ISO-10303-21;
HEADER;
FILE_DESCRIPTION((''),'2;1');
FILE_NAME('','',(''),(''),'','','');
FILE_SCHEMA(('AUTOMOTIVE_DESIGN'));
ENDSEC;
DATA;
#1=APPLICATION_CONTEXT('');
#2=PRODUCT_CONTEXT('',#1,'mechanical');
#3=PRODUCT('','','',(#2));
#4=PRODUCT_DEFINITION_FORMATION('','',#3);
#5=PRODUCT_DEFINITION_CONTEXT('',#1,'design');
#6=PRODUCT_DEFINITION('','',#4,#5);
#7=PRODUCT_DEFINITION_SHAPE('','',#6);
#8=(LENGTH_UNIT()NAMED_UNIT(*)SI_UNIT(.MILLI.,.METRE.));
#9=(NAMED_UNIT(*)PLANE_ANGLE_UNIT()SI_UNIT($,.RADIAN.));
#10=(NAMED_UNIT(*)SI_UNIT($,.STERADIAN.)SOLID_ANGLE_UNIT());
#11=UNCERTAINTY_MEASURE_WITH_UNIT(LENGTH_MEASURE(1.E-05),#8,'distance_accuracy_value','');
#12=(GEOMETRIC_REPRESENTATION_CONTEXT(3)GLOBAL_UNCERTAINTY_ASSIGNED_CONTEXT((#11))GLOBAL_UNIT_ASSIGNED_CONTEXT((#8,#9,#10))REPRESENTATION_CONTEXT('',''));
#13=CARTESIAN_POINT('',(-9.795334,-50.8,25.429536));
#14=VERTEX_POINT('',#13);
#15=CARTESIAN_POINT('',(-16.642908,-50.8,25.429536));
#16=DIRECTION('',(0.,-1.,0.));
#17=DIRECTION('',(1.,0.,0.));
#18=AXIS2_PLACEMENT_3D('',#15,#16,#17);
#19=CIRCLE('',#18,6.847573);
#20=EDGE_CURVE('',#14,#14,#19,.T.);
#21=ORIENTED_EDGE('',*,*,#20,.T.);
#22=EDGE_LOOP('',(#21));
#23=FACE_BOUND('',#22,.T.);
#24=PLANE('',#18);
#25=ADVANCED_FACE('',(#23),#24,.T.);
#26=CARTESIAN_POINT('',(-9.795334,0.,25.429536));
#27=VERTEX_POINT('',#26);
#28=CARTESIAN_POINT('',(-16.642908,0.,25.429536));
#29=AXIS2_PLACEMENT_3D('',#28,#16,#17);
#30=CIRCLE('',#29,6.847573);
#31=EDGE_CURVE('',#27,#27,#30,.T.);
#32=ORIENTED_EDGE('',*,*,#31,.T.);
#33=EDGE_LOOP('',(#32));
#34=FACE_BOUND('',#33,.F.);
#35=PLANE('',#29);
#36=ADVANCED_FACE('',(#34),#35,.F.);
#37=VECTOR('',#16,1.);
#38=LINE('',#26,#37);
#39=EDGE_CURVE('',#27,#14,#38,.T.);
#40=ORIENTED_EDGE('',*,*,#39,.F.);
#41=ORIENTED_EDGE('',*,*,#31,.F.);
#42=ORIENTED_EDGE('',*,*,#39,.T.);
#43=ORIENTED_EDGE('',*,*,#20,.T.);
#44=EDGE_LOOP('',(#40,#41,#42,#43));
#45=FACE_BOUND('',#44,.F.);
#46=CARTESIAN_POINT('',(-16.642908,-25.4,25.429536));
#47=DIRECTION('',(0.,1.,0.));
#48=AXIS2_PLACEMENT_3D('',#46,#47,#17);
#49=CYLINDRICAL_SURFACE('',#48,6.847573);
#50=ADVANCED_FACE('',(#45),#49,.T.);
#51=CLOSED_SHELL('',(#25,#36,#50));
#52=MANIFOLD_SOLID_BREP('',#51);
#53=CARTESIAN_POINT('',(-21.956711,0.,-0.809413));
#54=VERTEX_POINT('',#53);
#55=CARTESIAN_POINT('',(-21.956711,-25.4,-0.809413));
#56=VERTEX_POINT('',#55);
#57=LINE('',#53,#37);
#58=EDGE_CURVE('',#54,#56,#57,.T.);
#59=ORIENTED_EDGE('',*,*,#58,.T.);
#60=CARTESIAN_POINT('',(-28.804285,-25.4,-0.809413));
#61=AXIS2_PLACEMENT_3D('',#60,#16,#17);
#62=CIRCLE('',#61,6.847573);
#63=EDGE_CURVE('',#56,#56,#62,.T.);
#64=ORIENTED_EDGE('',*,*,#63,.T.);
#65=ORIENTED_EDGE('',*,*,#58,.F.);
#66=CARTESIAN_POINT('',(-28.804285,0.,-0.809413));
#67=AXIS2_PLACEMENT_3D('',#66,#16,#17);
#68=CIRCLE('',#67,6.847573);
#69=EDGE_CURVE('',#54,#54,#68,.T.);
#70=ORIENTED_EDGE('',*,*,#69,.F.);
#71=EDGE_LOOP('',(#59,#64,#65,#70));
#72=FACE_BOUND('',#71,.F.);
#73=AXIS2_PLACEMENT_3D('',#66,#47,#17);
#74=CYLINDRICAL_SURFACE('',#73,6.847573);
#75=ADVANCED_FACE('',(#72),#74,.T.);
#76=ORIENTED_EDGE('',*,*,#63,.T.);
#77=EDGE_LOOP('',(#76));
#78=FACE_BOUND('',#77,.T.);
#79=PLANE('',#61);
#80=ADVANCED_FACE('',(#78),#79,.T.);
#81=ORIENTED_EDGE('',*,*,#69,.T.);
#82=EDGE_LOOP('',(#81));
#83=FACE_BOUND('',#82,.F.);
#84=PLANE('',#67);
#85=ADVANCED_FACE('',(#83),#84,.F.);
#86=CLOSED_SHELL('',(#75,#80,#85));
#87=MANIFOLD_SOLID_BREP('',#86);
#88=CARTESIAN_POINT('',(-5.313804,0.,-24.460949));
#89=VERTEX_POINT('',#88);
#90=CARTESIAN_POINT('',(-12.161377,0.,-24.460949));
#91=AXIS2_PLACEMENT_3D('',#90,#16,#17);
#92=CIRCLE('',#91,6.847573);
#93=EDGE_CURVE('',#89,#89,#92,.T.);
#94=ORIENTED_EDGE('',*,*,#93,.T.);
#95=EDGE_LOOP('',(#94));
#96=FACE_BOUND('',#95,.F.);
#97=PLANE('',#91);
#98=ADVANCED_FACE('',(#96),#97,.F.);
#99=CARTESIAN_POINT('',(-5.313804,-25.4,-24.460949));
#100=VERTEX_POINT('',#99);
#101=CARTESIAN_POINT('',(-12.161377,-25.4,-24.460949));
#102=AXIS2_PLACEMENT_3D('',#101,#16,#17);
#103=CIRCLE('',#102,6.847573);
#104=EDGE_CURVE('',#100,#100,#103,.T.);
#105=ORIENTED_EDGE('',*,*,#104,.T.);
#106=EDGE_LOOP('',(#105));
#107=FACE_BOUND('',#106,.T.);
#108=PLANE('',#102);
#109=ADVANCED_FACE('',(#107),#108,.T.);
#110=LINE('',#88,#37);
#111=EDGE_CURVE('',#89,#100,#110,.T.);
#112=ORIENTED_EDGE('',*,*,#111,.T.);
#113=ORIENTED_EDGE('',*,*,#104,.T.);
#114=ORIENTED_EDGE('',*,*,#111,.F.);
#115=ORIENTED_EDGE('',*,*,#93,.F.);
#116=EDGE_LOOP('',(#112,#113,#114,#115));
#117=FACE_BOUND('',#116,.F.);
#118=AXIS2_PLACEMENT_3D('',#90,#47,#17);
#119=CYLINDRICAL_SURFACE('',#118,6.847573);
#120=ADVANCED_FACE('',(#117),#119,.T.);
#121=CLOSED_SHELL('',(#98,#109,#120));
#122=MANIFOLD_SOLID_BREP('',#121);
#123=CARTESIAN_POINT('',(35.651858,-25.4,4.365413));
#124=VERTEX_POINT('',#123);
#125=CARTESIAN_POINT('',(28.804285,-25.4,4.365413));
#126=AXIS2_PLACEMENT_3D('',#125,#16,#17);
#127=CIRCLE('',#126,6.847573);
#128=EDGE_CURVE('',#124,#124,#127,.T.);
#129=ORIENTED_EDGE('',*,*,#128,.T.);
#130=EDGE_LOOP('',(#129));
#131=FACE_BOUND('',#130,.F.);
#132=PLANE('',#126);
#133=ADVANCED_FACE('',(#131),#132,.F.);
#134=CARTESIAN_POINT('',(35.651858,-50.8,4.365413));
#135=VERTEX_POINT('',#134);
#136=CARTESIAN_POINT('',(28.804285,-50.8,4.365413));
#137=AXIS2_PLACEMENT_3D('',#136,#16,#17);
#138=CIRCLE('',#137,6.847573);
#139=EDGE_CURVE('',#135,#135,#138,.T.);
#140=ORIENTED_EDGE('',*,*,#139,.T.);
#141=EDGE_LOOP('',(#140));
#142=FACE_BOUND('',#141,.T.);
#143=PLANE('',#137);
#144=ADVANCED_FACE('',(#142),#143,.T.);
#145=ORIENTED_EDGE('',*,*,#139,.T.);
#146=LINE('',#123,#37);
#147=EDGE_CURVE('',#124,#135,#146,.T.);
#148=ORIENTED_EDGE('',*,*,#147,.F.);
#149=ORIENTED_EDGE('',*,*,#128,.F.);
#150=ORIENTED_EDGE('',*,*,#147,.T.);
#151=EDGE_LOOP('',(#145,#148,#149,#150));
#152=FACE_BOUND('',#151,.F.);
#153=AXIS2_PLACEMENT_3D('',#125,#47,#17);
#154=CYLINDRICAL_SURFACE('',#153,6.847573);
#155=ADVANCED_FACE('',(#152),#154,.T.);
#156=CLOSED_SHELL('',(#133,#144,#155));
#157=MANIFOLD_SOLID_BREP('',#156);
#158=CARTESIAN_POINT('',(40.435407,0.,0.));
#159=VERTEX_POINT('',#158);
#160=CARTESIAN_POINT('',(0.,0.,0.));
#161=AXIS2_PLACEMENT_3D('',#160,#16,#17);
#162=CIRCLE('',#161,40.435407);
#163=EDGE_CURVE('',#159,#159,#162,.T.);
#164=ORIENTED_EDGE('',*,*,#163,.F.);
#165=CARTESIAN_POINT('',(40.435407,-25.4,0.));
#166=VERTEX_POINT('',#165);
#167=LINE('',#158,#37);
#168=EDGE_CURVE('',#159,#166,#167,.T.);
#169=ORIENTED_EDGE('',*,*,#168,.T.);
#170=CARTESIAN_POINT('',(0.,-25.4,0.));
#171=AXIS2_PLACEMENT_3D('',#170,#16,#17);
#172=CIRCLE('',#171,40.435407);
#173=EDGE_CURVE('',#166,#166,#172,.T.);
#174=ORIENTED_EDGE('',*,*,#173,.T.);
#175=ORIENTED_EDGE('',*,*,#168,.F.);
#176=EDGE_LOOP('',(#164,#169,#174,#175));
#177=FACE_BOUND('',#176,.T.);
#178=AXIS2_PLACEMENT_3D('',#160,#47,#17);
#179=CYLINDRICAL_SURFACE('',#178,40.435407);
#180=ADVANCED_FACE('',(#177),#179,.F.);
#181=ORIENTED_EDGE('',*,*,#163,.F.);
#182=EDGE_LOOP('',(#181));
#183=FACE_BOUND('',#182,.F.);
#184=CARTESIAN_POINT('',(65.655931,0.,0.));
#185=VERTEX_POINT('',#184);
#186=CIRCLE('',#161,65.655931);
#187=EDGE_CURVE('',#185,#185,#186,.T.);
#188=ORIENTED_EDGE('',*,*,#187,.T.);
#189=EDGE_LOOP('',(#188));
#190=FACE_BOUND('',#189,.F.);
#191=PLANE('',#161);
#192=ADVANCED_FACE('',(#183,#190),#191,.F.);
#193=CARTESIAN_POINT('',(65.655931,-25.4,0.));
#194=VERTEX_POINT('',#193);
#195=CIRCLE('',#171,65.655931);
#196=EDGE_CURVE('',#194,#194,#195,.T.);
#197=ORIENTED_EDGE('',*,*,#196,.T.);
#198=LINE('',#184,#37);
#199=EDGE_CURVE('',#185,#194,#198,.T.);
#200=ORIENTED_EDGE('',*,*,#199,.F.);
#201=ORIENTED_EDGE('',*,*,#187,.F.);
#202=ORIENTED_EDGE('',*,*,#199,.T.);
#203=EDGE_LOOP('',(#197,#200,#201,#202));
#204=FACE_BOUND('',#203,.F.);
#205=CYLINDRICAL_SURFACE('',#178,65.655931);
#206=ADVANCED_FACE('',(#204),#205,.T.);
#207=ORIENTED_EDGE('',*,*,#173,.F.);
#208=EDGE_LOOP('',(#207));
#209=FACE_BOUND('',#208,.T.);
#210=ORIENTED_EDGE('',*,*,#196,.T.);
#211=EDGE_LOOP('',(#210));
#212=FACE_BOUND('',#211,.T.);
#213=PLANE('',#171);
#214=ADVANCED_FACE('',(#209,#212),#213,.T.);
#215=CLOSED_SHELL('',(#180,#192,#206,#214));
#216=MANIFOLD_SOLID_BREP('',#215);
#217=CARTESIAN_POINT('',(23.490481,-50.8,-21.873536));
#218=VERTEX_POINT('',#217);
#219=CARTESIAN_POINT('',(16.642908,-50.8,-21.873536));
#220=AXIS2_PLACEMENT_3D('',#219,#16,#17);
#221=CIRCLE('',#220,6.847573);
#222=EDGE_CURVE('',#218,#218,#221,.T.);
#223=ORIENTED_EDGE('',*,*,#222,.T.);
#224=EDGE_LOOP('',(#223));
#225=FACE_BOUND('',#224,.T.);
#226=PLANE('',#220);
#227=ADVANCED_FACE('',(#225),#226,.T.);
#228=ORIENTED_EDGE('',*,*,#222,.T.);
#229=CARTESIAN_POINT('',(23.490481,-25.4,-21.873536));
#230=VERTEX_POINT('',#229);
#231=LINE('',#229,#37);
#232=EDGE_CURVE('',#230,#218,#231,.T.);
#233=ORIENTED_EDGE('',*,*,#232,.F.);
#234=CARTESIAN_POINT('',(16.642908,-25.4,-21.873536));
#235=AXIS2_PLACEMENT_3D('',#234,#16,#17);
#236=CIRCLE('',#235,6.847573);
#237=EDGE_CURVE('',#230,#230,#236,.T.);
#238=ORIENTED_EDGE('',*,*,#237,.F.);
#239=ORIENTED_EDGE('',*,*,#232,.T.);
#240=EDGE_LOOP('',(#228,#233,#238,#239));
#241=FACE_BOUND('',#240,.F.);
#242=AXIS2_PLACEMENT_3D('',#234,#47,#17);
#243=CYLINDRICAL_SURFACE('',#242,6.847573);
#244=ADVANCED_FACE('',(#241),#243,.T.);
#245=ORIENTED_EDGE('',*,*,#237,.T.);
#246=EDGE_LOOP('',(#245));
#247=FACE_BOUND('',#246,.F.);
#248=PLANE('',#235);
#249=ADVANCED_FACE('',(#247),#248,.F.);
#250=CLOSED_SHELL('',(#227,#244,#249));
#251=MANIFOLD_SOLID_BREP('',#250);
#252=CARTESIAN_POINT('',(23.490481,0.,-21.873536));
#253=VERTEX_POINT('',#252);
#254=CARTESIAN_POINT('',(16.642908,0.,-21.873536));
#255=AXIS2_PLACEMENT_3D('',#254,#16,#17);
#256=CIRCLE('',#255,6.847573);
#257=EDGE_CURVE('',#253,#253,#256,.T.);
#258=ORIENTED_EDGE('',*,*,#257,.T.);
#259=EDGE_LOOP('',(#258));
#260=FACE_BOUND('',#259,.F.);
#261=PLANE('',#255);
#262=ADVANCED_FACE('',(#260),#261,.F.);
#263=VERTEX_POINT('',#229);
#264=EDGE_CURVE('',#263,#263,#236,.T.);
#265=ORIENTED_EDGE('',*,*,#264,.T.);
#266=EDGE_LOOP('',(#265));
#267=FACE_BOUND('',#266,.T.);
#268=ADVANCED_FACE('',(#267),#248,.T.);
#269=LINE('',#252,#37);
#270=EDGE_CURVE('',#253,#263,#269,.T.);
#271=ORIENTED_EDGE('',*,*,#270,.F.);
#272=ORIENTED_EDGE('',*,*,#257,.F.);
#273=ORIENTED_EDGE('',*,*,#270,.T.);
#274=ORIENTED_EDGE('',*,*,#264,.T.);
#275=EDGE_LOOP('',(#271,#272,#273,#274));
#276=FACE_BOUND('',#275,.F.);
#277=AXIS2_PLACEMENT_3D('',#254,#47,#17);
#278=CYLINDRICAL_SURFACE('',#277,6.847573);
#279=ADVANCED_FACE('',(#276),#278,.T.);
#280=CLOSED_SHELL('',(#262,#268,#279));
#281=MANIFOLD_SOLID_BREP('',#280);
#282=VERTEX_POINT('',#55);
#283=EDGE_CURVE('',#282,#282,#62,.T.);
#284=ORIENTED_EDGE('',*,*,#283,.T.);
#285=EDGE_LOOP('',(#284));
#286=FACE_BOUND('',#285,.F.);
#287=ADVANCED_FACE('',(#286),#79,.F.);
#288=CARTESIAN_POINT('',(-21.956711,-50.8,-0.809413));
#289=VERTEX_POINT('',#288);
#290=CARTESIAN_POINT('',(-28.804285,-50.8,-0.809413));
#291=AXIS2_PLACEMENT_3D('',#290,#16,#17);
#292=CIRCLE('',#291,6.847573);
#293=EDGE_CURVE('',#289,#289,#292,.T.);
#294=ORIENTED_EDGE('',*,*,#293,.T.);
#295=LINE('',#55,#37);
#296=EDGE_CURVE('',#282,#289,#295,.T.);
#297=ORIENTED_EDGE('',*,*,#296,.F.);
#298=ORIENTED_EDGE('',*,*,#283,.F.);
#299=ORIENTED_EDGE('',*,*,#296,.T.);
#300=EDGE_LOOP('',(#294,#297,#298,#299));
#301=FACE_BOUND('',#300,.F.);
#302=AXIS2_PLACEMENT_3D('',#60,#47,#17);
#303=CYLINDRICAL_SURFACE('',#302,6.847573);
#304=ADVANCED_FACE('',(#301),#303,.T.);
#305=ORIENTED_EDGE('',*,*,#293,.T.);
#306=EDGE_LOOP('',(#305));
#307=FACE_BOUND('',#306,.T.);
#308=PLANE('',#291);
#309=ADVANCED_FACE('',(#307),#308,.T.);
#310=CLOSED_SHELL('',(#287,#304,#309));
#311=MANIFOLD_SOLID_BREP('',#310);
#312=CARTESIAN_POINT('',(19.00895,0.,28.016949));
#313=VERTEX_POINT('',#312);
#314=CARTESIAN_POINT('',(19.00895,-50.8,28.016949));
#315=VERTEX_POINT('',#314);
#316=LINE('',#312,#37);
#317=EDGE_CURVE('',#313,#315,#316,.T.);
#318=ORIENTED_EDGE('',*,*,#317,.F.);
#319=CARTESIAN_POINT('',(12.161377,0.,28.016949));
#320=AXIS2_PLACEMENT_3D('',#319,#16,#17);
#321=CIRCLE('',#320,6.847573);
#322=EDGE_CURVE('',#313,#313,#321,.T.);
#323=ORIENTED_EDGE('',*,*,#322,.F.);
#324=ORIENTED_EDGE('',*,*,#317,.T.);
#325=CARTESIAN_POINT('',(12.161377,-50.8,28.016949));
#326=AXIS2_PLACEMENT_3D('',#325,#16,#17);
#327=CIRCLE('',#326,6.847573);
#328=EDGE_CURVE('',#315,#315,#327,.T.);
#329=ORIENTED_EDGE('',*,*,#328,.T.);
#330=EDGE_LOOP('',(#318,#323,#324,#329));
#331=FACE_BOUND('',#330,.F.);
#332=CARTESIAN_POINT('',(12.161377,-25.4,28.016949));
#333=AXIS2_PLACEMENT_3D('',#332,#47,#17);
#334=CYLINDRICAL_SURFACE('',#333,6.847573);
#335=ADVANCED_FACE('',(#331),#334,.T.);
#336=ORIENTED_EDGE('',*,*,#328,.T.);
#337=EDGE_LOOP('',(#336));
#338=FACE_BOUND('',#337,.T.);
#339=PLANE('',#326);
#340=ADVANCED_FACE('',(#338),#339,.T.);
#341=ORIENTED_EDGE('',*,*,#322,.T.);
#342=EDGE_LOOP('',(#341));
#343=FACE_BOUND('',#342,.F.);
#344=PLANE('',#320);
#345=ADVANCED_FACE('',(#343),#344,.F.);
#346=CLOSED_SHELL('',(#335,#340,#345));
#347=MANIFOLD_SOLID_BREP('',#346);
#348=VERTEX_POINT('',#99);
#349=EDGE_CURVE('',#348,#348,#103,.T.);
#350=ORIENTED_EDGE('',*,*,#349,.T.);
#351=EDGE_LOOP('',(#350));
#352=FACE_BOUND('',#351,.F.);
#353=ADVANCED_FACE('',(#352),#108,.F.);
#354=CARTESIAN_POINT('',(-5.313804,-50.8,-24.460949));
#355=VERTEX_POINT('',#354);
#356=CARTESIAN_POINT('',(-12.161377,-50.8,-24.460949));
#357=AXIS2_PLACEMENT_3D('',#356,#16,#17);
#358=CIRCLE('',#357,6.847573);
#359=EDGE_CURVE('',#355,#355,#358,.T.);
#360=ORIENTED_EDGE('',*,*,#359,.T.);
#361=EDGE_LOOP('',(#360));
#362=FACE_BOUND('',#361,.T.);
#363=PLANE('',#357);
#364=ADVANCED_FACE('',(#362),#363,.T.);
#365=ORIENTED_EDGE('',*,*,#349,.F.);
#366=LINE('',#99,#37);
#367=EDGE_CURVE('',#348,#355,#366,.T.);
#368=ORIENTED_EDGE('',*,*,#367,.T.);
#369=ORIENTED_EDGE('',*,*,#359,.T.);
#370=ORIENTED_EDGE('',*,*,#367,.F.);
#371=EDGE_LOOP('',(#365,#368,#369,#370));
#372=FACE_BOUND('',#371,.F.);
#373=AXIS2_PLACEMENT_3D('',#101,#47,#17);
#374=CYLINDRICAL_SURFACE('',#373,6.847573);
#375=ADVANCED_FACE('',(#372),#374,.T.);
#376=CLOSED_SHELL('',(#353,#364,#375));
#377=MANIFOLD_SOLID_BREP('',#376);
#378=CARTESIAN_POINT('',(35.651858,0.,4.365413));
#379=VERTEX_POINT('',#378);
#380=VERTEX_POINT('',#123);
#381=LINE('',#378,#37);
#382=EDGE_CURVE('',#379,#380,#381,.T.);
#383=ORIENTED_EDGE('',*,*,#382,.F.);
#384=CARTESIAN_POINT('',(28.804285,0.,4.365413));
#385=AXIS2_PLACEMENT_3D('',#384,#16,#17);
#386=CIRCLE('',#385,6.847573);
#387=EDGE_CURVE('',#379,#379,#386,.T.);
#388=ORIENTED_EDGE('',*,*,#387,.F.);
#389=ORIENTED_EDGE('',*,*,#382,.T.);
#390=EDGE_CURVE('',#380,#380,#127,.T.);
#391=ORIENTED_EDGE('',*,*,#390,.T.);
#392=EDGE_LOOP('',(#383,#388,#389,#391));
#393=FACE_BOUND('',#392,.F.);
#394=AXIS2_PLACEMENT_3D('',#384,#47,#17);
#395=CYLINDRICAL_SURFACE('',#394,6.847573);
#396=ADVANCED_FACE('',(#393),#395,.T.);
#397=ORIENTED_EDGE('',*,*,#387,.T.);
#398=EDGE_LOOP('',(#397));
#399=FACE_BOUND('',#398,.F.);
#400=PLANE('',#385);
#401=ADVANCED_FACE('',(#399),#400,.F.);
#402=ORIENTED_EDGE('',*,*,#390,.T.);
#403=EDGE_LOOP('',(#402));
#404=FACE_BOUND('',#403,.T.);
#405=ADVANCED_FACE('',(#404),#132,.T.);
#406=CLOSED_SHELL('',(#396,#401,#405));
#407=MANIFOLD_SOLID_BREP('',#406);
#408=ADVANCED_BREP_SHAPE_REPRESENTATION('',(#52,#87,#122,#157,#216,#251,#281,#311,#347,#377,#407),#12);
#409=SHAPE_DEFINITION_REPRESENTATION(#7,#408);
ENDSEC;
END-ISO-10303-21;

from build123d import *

# Parameters (mm, degrees)
F0_R     = 65.6559309804
F0_R_2   = 40.4354066136
F3_DEPTH = 25.4
F4_R     = 6.847573374
F5_DEPTH = 25.4
F6_DEPTH = 25.4
F7_DEPTH = 25.4
F8_DEPTH = 25.4


# Not quite as in the source:
# - the program builds the solid bodies; features that only make, move or delete a surface that nothing else refers to are left out


with BuildPart() as f3:
    # F0 (on Front) → F3 (new body)
    with BuildSketch(Plane.XZ):
        Circle(F0_R)
        Circle(F0_R_2, mode=Mode.SUBTRACT)
    extrude(amount=F3_DEPTH)


with BuildPart() as f5:
    # F4 (on Front) → F5 (new body)
    with BuildSketch(Plane.XZ):
        with Locations((12.1613769004, 28.0169486328)):
            Circle(F4_R)
    extrude(amount=F5_DEPTH)

    # F8 (add): a face of the model
    f8_faces = [f5.faces().sort_by_distance(p)[0] for p in [
        (12.1613769004, -25.4, 28.0169486328),
    ]]
    extrude(f8_faces, amount=F8_DEPTH)


with BuildPart() as f5b:
    # F4 (on Front) → F5, piece 2 (new body)
    with BuildSketch(Plane.XZ):
        with Locations((-16.6429076344, 25.4295356572)):
            Circle(F4_R)
    extrude(amount=F5_DEPTH)

    # F7 (add): a face of the model
    f7_faces = [f5b.faces().sort_by_distance(p)[0] for p in [
        (-16.6429076344, -25.4, 25.4295356572),
    ]]
    extrude(f7_faces, amount=F7_DEPTH)


with BuildPart() as f5c:
    # F4 (on Front) → F5, piece 3 (new body)
    with BuildSketch(Plane.XZ):
        with Locations((-28.8042845348, -0.8094129756)):
            Circle(F4_R)
    extrude(amount=F5_DEPTH)


with BuildPart() as f5d:
    # F4 (on Front) → F5, piece 4 (new body)
    with BuildSketch(Plane.XZ):
        with Locations((-12.1613769004, -24.4609486328)):
            Circle(F4_R)
    extrude(amount=F5_DEPTH)


with BuildPart() as f5e:
    # F4 (on Front) → F5, piece 5 (new body)
    with BuildSketch(Plane.XZ):
        with Locations((16.6429076344, -21.8735356572)):
            Circle(F4_R)
    extrude(amount=F5_DEPTH)


with BuildPart() as f5f:
    # F4 (on Front) → F5, piece 6 (new body)
    with BuildSketch(Plane.XZ):
        with Locations((28.8042845348, 4.3654129756)):
            Circle(F4_R)
    extrude(amount=F5_DEPTH)


with BuildPart() as f6:
    # F6 (new): a face of the model
    f6_faces = [f5d.part.faces().sort_by_distance(p)[0] for p in [
        (-12.1613769004, -25.4, -24.4609486328),
    ]]
    extrude(f6_faces, amount=F6_DEPTH)


with BuildPart() as f6b:
    # F6#2 (new): a face of the model
    f6_2_faces = [f5e.part.faces().sort_by_distance(p)[0] for p in [
        (16.6429076344, -25.4, -21.8735356572),
    ]]
    extrude(f6_2_faces, amount=F6_DEPTH)


with BuildPart() as f6c:
    # F6#3 (new): a face of the model
    f6_3_faces = [f5f.part.faces().sort_by_distance(p)[0] for p in [
        (28.8042845348, -25.4, 4.3654129756),
    ]]
    extrude(f6_3_faces, amount=F6_DEPTH)


with BuildPart() as f6d:
    # F6#4 (new): a face of the model
    f6_4_faces = [f5c.part.faces().sort_by_distance(p)[0] for p in [
        (-28.8042845348, -25.4, -0.8094129756),
    ]]
    extrude(f6_4_faces, amount=F6_DEPTH)


solid = Compound([f3.part, f5.part, f5b.part, f5c.part, f5d.part, f5e.part, f5f.part, f6.part, f6b.part, f6c.part, f6d.part])
